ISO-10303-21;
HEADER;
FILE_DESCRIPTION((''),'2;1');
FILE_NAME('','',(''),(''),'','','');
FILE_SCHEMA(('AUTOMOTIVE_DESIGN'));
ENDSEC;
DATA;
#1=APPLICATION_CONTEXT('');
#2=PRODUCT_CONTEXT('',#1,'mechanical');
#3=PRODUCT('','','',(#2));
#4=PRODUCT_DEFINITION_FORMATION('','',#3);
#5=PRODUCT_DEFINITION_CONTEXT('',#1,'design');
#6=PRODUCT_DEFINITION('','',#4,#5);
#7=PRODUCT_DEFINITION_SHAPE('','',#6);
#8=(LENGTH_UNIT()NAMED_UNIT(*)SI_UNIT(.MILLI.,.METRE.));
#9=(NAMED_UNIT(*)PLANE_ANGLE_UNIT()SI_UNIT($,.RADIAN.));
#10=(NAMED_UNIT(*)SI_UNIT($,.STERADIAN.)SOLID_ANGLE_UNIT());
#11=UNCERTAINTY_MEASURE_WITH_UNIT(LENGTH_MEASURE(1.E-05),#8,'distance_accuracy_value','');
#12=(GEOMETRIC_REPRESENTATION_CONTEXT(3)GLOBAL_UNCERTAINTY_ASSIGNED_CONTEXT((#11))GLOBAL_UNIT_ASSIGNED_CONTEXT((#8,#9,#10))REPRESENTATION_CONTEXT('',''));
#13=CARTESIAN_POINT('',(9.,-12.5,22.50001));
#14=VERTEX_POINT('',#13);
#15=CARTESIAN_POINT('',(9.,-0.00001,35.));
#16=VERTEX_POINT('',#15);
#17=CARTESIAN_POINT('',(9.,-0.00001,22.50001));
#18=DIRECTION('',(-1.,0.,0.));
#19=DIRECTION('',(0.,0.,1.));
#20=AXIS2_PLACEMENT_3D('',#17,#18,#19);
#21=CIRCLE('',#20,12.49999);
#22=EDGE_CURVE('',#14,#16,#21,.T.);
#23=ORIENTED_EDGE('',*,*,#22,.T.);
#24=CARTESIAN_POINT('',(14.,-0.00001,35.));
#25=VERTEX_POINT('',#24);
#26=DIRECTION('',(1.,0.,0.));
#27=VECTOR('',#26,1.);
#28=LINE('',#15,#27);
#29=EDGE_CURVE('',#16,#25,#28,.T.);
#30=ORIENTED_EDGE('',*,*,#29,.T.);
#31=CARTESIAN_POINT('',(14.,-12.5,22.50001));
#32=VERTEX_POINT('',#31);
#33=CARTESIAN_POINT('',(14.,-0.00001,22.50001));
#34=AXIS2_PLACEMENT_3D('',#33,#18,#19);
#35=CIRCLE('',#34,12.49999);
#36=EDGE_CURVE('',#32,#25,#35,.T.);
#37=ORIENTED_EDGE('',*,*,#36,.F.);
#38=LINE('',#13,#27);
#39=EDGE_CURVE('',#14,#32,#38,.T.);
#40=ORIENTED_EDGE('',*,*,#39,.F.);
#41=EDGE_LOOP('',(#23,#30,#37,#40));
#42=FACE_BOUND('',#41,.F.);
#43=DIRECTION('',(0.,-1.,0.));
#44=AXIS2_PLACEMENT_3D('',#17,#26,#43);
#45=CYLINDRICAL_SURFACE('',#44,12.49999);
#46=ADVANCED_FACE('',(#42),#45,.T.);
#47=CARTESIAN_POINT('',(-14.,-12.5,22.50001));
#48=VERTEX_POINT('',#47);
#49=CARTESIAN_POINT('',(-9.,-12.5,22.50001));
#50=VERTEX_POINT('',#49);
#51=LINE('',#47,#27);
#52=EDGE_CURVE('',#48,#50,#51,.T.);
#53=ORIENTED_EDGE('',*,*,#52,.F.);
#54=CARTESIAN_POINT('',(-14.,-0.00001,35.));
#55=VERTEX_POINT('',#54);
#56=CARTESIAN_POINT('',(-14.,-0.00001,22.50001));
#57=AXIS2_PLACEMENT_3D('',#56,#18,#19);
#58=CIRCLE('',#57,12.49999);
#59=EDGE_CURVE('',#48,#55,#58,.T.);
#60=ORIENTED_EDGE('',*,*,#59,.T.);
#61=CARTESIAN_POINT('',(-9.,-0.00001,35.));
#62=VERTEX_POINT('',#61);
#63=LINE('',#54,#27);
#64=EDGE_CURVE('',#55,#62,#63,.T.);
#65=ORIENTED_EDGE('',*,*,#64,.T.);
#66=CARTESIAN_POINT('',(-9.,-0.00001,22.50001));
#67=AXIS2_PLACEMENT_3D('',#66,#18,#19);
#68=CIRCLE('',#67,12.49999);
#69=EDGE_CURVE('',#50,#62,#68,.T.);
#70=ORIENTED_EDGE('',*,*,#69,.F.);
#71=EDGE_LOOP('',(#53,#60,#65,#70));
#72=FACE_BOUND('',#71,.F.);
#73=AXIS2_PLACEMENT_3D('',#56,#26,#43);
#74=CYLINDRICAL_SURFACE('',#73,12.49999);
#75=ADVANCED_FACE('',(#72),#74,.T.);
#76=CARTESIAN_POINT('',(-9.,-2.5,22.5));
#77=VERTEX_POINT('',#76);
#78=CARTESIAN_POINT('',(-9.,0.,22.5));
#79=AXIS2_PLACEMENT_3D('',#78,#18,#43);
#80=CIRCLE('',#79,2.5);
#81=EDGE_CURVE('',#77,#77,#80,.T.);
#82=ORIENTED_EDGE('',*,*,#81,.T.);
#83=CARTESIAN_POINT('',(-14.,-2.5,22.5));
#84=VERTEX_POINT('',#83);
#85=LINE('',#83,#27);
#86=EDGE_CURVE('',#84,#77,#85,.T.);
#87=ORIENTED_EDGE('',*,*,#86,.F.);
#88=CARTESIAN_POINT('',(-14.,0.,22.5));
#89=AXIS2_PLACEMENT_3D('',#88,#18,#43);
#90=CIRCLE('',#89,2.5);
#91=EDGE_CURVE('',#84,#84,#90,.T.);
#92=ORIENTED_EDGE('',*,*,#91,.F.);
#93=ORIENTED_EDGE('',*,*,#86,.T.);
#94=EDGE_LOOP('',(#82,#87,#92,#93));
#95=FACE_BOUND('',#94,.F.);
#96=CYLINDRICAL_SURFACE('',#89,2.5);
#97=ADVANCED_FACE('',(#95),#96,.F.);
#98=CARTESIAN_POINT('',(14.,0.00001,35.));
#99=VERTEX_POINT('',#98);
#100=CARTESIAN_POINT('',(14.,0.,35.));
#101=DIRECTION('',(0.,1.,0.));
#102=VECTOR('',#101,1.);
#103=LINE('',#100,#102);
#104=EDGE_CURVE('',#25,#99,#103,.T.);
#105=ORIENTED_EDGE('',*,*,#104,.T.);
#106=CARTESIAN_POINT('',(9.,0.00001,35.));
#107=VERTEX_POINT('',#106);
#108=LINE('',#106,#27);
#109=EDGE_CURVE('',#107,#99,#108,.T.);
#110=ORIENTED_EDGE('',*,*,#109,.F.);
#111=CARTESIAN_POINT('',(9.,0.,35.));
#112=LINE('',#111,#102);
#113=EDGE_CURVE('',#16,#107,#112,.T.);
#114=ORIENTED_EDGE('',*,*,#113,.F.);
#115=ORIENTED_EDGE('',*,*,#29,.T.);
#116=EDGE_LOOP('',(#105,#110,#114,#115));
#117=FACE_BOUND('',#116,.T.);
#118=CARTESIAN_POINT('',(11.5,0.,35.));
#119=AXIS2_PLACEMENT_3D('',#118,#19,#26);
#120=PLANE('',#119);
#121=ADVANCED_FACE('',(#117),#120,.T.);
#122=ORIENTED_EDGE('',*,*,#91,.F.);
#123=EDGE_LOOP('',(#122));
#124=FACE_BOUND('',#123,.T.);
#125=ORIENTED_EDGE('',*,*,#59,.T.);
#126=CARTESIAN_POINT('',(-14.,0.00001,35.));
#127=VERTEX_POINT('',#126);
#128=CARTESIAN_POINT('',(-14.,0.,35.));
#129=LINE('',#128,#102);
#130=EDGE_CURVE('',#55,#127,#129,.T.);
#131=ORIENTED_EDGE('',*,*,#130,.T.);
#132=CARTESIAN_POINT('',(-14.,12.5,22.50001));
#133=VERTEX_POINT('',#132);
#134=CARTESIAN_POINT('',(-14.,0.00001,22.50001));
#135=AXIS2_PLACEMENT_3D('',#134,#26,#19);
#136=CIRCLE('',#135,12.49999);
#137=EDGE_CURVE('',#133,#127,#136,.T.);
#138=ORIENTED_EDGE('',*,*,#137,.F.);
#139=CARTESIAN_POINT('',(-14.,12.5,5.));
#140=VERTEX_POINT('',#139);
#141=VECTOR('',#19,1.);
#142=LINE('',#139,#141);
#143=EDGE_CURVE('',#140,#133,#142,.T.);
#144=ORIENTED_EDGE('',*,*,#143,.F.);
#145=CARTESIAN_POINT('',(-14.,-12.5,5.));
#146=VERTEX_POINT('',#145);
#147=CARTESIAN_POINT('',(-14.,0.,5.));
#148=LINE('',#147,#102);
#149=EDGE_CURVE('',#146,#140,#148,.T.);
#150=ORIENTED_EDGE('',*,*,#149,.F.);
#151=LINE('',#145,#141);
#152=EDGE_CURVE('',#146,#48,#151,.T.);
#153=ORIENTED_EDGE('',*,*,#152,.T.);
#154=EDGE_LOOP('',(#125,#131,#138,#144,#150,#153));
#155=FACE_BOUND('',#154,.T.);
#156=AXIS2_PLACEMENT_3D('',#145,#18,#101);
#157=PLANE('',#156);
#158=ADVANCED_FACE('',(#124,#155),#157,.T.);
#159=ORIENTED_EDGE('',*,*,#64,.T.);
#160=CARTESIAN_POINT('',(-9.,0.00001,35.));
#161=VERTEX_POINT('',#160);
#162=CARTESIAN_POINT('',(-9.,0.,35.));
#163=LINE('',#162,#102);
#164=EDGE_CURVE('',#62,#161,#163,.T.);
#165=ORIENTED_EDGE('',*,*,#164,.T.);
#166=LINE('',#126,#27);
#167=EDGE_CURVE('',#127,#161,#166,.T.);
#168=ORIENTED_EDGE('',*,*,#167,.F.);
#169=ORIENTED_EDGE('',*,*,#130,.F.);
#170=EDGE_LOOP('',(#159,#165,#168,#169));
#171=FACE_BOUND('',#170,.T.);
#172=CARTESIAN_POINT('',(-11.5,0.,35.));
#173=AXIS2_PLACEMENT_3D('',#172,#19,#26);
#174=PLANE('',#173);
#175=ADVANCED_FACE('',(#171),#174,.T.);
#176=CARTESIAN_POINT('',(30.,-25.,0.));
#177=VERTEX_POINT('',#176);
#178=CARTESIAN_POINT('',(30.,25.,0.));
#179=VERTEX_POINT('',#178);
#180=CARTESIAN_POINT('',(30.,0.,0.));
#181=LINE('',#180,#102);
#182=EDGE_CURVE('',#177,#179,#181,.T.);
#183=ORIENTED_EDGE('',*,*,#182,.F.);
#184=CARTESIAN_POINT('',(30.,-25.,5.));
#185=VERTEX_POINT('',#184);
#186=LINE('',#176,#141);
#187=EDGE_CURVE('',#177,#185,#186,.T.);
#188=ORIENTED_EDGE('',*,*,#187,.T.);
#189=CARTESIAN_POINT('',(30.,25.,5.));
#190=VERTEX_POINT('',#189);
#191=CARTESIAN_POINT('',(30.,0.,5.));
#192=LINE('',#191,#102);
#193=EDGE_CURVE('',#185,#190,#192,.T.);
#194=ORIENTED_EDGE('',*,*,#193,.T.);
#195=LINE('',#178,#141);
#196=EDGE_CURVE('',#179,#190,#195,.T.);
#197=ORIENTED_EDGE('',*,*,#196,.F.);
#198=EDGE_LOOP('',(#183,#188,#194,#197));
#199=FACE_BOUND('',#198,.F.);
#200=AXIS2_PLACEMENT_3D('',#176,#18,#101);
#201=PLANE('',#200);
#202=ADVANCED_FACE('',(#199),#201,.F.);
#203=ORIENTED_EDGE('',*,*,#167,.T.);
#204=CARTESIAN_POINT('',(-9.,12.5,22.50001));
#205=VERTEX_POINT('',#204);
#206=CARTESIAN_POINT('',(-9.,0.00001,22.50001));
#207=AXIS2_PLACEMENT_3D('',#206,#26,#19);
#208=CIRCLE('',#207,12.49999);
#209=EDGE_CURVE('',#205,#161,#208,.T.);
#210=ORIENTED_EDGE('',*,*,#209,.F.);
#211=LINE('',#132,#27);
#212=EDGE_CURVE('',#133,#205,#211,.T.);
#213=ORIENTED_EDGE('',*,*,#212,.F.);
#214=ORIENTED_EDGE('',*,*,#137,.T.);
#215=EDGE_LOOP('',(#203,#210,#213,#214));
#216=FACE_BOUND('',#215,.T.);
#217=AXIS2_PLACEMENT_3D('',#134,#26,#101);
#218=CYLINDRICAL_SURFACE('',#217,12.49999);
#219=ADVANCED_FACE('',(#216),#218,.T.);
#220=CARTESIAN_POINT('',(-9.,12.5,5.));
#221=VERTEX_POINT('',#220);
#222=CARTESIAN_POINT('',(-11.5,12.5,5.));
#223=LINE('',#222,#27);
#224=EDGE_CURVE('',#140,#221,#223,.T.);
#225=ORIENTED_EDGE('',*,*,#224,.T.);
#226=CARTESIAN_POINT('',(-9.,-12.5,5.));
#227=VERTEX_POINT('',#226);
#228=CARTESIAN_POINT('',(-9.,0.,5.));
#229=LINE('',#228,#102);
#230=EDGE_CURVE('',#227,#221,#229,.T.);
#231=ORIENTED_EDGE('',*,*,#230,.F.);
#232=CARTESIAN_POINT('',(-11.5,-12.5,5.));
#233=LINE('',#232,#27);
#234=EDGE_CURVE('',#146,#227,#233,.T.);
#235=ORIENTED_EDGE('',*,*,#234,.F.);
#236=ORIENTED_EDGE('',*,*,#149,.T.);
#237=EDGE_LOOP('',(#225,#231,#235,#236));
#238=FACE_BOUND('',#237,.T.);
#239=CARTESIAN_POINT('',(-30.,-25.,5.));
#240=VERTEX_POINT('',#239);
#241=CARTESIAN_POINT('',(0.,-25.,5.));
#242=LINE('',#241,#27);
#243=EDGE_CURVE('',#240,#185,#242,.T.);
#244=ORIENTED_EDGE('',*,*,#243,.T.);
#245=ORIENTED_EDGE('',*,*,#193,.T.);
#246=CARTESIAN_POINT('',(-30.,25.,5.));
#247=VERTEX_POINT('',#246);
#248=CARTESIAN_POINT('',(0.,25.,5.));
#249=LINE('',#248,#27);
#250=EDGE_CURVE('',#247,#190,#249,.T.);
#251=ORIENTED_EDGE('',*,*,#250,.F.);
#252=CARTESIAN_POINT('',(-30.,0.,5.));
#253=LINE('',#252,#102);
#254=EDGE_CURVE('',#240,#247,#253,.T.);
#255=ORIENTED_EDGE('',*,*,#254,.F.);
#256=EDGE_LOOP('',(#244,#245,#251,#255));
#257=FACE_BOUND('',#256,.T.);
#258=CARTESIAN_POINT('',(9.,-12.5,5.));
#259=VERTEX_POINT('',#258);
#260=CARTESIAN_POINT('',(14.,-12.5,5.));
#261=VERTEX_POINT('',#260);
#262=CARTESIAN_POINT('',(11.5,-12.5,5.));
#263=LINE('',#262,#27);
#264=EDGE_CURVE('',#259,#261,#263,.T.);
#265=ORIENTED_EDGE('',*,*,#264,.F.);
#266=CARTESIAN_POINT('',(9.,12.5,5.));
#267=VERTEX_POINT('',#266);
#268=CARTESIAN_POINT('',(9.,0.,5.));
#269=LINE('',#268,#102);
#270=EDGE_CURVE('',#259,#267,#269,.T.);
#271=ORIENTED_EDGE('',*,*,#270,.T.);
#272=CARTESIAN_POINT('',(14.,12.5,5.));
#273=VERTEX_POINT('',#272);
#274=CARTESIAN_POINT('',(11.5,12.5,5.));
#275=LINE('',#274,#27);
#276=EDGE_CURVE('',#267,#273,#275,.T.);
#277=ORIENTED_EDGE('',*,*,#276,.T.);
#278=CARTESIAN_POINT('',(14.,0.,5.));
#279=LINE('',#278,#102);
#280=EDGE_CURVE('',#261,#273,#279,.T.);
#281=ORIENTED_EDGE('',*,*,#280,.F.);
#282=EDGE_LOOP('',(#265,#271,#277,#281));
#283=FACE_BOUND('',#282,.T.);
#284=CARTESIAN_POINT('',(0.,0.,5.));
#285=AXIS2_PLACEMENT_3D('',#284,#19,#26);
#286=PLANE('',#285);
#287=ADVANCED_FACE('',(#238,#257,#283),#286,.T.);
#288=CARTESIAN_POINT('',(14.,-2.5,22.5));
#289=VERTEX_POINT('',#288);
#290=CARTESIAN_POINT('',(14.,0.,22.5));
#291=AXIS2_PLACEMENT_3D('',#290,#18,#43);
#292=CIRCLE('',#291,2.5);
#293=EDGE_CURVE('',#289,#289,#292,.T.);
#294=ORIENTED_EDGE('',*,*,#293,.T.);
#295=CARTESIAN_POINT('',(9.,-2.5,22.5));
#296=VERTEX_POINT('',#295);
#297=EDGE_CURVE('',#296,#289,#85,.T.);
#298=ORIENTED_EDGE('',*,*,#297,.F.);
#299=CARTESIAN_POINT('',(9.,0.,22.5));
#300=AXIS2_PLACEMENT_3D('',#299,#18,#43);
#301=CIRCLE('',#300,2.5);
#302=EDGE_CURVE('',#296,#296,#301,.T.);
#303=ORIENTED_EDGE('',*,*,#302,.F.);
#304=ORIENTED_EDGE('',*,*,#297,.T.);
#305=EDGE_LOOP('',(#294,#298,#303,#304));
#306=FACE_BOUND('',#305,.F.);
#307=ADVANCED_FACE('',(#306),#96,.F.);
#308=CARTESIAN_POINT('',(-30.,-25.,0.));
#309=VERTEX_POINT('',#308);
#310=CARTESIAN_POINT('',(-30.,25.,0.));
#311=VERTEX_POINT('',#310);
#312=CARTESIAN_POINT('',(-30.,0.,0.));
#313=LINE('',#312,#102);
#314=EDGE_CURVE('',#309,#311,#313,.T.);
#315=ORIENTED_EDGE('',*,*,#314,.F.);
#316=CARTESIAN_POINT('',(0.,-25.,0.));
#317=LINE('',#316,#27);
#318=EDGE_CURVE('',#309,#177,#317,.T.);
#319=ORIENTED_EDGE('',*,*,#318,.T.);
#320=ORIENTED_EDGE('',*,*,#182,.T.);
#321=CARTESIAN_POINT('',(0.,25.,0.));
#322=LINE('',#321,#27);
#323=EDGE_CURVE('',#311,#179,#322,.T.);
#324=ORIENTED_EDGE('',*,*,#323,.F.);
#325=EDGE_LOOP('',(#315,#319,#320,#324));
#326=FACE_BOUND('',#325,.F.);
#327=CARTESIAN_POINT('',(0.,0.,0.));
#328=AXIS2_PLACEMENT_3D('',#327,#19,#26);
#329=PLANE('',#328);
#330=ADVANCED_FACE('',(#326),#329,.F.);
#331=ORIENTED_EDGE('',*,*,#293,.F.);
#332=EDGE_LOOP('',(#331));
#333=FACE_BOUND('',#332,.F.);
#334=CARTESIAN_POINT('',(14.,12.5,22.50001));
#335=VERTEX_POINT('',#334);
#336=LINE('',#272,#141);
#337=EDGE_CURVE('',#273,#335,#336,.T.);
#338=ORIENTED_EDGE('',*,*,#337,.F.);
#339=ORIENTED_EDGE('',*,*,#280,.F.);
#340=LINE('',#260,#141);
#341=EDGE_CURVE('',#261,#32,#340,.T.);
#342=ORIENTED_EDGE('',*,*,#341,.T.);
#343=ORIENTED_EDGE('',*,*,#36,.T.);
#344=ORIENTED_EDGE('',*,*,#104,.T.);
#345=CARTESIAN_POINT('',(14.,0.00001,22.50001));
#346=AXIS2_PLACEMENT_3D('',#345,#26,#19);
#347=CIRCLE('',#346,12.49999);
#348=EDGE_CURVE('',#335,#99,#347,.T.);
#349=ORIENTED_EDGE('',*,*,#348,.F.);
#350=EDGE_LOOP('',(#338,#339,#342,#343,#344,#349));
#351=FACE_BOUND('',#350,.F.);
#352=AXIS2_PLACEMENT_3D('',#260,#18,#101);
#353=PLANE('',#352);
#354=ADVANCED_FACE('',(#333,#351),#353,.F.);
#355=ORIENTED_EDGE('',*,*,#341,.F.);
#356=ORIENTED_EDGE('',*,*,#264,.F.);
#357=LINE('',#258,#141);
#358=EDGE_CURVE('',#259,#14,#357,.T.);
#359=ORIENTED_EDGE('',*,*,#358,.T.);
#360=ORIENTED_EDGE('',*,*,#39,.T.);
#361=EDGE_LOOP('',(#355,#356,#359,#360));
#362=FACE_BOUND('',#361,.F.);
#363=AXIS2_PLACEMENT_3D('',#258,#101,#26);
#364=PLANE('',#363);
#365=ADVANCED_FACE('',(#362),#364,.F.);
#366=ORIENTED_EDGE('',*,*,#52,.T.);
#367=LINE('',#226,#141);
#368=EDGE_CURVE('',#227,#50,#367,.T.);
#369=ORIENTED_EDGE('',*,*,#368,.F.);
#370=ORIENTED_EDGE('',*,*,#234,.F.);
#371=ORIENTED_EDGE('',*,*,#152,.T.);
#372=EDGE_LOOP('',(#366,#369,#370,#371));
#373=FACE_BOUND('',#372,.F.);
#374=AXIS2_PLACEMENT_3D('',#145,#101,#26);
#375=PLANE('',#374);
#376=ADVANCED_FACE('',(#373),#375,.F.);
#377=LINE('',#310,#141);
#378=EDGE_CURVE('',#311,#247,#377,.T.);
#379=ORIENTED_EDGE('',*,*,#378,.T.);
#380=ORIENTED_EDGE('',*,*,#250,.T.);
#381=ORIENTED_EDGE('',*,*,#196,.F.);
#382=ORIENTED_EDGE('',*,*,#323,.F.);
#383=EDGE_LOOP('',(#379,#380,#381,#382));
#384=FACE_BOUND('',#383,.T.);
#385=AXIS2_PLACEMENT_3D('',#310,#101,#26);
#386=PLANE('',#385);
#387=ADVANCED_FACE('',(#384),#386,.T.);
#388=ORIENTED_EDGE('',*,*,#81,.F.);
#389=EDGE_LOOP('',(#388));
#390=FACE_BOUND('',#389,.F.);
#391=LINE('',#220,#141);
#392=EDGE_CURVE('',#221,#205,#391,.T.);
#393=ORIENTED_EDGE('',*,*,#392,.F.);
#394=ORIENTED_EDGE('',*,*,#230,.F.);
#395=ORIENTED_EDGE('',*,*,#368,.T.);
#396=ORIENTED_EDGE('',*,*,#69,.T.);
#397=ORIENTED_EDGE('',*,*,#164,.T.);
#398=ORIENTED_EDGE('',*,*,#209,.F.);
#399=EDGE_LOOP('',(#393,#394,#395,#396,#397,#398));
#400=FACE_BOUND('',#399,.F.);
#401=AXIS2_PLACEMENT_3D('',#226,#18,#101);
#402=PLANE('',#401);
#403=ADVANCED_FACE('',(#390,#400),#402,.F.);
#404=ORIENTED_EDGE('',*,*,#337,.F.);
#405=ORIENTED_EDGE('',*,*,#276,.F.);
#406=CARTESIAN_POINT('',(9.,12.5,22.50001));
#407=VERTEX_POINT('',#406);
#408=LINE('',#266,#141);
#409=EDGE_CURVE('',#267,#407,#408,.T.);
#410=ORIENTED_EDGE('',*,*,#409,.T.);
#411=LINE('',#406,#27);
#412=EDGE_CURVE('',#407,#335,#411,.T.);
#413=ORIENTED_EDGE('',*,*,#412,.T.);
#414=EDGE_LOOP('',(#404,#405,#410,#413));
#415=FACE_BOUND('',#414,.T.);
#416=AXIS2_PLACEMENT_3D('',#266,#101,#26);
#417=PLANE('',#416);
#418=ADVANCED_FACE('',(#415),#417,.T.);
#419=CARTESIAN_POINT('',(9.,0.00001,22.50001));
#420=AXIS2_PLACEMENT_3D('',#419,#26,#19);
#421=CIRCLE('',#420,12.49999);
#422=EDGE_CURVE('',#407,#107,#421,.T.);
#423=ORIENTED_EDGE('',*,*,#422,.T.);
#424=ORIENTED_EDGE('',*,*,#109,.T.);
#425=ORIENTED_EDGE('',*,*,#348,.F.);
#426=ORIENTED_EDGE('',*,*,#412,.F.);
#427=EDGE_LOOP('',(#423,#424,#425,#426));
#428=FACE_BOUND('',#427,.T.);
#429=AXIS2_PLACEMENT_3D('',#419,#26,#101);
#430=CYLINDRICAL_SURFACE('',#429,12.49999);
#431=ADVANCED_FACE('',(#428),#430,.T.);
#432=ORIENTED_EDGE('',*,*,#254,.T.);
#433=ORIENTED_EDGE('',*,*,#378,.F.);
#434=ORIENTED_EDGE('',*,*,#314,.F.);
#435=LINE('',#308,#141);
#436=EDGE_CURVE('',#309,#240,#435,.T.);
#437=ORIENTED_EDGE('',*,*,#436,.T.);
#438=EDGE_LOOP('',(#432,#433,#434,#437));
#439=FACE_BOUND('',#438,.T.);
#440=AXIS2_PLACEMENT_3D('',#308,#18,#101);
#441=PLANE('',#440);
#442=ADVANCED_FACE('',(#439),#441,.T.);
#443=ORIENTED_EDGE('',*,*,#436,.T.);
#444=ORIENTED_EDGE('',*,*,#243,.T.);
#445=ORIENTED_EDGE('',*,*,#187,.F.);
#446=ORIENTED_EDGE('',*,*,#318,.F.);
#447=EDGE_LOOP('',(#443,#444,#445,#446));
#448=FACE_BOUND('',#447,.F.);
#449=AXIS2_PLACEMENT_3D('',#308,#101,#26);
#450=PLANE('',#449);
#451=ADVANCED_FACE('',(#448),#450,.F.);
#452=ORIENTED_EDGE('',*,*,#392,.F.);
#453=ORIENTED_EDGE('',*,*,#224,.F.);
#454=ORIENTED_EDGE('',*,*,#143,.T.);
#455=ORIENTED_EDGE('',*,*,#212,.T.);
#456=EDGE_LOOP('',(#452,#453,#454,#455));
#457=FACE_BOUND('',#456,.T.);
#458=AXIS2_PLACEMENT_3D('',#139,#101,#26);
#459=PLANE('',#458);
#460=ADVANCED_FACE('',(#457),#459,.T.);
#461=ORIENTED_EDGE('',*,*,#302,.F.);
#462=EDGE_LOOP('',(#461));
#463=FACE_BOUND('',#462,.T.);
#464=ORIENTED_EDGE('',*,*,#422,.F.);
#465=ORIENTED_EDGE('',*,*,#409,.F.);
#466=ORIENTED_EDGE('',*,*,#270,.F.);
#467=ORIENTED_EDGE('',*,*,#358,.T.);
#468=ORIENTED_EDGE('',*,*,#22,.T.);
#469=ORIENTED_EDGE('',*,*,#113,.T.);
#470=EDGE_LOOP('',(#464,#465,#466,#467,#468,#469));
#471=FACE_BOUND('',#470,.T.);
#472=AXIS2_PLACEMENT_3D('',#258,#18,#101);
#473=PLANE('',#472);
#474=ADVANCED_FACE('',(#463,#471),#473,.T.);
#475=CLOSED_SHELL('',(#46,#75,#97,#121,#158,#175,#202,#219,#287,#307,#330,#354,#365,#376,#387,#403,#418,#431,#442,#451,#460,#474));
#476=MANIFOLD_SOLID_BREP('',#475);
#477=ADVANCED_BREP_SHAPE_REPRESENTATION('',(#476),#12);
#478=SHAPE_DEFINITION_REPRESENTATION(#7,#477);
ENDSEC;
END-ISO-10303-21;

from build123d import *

# Parameters (mm, degrees)
F0_W     = 60
F0_H     = 50
F1_DEPTH = 5
F2_W     = 5
F2_H     = 25
F3_DEPTH = 30
F4_R     = 12.49999
F5_R     = 2.5
F6_DEPTH = 50


# Not quite as in the source:
# - a fillet or chamfer is up to 0.001 mm smaller than in the source, because OpenCascade refuses the exact size


with BuildPart() as f1:
    # F0 (on Top) → F1 (new body)
    with BuildSketch(Plane.XY):
        Rectangle(F0_W, F0_H)
    extrude(amount=F1_DEPTH)

    # F2 (on face) → F3 (join)
    with BuildSketch(Plane.XY.offset(5)):
        with Locations((-11.5, 0)):
            Rectangle(F2_W, F2_H)
        with Locations((11.5, 0)):
            Rectangle(F2_W, F2_H)
    extrude(amount=F3_DEPTH)

    # F4 (radius 12.5 in the source; OpenCascade refuses exactly that, so slightly less here)
    f4_edges = [f1.edges().sort_by_distance(p)[0] for p in [
        (-11.5, -12.5, 35),
        (-11.5, 12.5, 35),
        (11.5, 12.5, 35),
        (11.5, -12.5, 35),
    ]]
    fillet(f4_edges, radius=F4_R)

    # F5 (on face) → F6 (cut)
    with BuildSketch(Plane(origin=(-14, 0, 0), x_dir=(0, -1, 0), z_dir=(-1, 0, 0))):
        with Locations((0, 22.5)):
            Circle(F5_R)
    extrude(amount=-F6_DEPTH, mode=Mode.SUBTRACT)


solid = f1.part
